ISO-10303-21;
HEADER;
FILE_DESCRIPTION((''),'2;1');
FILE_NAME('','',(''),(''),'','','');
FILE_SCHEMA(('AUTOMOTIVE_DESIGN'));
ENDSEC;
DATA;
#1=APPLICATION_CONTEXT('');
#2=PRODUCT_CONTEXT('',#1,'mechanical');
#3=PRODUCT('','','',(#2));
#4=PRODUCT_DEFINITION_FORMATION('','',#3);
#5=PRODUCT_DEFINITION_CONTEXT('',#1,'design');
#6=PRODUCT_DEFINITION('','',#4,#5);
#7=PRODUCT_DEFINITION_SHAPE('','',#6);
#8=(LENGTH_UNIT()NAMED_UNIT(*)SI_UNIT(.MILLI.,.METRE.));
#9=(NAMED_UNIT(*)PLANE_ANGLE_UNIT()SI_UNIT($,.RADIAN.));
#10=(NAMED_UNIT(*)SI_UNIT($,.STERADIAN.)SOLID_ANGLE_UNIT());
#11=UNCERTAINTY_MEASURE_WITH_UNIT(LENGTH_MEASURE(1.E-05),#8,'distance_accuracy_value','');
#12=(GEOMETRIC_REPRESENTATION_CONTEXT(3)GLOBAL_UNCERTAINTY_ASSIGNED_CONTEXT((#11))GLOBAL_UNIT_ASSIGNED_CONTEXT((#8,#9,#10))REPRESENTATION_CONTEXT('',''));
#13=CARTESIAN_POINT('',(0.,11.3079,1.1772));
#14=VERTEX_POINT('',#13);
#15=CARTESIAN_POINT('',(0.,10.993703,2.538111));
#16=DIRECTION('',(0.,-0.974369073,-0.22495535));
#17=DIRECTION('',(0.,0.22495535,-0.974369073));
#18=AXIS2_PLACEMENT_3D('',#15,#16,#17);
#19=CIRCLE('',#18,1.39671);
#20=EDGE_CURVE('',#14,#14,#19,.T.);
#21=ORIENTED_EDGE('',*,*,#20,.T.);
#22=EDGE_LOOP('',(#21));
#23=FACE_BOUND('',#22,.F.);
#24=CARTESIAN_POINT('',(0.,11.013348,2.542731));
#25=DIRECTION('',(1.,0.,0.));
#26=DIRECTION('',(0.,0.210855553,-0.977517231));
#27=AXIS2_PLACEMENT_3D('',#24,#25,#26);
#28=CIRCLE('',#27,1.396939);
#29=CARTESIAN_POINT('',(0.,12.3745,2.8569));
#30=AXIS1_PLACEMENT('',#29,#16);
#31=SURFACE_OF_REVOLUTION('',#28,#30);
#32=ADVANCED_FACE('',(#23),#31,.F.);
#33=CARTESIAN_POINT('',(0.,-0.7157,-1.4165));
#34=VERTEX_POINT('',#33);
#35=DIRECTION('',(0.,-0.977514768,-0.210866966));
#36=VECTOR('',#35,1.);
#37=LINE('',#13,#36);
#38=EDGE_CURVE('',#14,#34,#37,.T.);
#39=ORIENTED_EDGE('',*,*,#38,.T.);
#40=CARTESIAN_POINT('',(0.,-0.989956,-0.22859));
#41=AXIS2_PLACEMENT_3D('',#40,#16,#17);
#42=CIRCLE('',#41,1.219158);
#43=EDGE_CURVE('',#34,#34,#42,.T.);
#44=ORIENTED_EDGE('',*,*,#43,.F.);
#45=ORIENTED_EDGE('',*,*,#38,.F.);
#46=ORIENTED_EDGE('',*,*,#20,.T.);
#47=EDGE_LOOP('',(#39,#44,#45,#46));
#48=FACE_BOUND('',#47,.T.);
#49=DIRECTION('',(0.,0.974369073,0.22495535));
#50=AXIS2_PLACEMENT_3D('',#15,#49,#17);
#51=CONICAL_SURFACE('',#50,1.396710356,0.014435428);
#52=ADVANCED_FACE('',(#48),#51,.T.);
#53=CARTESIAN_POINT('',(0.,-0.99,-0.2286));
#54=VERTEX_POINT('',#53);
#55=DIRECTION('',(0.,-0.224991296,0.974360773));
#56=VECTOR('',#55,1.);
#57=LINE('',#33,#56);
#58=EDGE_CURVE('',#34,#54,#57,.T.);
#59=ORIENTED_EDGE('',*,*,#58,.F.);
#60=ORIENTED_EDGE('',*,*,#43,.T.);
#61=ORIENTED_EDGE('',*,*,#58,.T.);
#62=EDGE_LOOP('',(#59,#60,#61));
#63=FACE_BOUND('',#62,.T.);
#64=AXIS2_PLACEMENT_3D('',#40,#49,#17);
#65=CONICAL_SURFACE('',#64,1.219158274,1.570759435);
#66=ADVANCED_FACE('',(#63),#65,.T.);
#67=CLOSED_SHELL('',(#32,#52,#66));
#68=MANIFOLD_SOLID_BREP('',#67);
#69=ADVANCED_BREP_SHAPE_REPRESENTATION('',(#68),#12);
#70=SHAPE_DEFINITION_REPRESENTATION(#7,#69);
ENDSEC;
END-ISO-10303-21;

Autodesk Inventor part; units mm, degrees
sketch "Sketch_1" plane through (0, 0, 0) normal (1, 0, 0) x (0, 1, 0)
  line L0 (-0.99, -0.2286) -> (12.3745, 2.8569)
  arc A0 (11.3079, 1.1772) -> (12.3745, 2.8569) centre (11.0133, 2.5428) ccw
  line L1 (11.3079, 1.1772) -> (-0.7157, -1.4165)
  line L2 (-0.7157, -1.4165) -> (-0.99, -0.2286)
  line L3 (-0.99, -0.2286) -> (12.3745, 2.8569)
revolve "Revolution1" add sketch "Sketch_1" angle 360 about axis through (0, -0.99, -0.2286) along (0, -0.9743701, -0.2249511)
ref_plane "bushing_XY" through (0, 0, 0) normal (0, 1, 0) x (1, 0, 0)
ref_plane "bushing_YZ" through (0, 0, 0) normal (1, 0, 0) x (0, 0, -1)
ref_plane "bushing_ZX" through (0, 0, 0) normal (0, 0, -1) x (0, 1, 0)
properties part number "M2TSactu"
